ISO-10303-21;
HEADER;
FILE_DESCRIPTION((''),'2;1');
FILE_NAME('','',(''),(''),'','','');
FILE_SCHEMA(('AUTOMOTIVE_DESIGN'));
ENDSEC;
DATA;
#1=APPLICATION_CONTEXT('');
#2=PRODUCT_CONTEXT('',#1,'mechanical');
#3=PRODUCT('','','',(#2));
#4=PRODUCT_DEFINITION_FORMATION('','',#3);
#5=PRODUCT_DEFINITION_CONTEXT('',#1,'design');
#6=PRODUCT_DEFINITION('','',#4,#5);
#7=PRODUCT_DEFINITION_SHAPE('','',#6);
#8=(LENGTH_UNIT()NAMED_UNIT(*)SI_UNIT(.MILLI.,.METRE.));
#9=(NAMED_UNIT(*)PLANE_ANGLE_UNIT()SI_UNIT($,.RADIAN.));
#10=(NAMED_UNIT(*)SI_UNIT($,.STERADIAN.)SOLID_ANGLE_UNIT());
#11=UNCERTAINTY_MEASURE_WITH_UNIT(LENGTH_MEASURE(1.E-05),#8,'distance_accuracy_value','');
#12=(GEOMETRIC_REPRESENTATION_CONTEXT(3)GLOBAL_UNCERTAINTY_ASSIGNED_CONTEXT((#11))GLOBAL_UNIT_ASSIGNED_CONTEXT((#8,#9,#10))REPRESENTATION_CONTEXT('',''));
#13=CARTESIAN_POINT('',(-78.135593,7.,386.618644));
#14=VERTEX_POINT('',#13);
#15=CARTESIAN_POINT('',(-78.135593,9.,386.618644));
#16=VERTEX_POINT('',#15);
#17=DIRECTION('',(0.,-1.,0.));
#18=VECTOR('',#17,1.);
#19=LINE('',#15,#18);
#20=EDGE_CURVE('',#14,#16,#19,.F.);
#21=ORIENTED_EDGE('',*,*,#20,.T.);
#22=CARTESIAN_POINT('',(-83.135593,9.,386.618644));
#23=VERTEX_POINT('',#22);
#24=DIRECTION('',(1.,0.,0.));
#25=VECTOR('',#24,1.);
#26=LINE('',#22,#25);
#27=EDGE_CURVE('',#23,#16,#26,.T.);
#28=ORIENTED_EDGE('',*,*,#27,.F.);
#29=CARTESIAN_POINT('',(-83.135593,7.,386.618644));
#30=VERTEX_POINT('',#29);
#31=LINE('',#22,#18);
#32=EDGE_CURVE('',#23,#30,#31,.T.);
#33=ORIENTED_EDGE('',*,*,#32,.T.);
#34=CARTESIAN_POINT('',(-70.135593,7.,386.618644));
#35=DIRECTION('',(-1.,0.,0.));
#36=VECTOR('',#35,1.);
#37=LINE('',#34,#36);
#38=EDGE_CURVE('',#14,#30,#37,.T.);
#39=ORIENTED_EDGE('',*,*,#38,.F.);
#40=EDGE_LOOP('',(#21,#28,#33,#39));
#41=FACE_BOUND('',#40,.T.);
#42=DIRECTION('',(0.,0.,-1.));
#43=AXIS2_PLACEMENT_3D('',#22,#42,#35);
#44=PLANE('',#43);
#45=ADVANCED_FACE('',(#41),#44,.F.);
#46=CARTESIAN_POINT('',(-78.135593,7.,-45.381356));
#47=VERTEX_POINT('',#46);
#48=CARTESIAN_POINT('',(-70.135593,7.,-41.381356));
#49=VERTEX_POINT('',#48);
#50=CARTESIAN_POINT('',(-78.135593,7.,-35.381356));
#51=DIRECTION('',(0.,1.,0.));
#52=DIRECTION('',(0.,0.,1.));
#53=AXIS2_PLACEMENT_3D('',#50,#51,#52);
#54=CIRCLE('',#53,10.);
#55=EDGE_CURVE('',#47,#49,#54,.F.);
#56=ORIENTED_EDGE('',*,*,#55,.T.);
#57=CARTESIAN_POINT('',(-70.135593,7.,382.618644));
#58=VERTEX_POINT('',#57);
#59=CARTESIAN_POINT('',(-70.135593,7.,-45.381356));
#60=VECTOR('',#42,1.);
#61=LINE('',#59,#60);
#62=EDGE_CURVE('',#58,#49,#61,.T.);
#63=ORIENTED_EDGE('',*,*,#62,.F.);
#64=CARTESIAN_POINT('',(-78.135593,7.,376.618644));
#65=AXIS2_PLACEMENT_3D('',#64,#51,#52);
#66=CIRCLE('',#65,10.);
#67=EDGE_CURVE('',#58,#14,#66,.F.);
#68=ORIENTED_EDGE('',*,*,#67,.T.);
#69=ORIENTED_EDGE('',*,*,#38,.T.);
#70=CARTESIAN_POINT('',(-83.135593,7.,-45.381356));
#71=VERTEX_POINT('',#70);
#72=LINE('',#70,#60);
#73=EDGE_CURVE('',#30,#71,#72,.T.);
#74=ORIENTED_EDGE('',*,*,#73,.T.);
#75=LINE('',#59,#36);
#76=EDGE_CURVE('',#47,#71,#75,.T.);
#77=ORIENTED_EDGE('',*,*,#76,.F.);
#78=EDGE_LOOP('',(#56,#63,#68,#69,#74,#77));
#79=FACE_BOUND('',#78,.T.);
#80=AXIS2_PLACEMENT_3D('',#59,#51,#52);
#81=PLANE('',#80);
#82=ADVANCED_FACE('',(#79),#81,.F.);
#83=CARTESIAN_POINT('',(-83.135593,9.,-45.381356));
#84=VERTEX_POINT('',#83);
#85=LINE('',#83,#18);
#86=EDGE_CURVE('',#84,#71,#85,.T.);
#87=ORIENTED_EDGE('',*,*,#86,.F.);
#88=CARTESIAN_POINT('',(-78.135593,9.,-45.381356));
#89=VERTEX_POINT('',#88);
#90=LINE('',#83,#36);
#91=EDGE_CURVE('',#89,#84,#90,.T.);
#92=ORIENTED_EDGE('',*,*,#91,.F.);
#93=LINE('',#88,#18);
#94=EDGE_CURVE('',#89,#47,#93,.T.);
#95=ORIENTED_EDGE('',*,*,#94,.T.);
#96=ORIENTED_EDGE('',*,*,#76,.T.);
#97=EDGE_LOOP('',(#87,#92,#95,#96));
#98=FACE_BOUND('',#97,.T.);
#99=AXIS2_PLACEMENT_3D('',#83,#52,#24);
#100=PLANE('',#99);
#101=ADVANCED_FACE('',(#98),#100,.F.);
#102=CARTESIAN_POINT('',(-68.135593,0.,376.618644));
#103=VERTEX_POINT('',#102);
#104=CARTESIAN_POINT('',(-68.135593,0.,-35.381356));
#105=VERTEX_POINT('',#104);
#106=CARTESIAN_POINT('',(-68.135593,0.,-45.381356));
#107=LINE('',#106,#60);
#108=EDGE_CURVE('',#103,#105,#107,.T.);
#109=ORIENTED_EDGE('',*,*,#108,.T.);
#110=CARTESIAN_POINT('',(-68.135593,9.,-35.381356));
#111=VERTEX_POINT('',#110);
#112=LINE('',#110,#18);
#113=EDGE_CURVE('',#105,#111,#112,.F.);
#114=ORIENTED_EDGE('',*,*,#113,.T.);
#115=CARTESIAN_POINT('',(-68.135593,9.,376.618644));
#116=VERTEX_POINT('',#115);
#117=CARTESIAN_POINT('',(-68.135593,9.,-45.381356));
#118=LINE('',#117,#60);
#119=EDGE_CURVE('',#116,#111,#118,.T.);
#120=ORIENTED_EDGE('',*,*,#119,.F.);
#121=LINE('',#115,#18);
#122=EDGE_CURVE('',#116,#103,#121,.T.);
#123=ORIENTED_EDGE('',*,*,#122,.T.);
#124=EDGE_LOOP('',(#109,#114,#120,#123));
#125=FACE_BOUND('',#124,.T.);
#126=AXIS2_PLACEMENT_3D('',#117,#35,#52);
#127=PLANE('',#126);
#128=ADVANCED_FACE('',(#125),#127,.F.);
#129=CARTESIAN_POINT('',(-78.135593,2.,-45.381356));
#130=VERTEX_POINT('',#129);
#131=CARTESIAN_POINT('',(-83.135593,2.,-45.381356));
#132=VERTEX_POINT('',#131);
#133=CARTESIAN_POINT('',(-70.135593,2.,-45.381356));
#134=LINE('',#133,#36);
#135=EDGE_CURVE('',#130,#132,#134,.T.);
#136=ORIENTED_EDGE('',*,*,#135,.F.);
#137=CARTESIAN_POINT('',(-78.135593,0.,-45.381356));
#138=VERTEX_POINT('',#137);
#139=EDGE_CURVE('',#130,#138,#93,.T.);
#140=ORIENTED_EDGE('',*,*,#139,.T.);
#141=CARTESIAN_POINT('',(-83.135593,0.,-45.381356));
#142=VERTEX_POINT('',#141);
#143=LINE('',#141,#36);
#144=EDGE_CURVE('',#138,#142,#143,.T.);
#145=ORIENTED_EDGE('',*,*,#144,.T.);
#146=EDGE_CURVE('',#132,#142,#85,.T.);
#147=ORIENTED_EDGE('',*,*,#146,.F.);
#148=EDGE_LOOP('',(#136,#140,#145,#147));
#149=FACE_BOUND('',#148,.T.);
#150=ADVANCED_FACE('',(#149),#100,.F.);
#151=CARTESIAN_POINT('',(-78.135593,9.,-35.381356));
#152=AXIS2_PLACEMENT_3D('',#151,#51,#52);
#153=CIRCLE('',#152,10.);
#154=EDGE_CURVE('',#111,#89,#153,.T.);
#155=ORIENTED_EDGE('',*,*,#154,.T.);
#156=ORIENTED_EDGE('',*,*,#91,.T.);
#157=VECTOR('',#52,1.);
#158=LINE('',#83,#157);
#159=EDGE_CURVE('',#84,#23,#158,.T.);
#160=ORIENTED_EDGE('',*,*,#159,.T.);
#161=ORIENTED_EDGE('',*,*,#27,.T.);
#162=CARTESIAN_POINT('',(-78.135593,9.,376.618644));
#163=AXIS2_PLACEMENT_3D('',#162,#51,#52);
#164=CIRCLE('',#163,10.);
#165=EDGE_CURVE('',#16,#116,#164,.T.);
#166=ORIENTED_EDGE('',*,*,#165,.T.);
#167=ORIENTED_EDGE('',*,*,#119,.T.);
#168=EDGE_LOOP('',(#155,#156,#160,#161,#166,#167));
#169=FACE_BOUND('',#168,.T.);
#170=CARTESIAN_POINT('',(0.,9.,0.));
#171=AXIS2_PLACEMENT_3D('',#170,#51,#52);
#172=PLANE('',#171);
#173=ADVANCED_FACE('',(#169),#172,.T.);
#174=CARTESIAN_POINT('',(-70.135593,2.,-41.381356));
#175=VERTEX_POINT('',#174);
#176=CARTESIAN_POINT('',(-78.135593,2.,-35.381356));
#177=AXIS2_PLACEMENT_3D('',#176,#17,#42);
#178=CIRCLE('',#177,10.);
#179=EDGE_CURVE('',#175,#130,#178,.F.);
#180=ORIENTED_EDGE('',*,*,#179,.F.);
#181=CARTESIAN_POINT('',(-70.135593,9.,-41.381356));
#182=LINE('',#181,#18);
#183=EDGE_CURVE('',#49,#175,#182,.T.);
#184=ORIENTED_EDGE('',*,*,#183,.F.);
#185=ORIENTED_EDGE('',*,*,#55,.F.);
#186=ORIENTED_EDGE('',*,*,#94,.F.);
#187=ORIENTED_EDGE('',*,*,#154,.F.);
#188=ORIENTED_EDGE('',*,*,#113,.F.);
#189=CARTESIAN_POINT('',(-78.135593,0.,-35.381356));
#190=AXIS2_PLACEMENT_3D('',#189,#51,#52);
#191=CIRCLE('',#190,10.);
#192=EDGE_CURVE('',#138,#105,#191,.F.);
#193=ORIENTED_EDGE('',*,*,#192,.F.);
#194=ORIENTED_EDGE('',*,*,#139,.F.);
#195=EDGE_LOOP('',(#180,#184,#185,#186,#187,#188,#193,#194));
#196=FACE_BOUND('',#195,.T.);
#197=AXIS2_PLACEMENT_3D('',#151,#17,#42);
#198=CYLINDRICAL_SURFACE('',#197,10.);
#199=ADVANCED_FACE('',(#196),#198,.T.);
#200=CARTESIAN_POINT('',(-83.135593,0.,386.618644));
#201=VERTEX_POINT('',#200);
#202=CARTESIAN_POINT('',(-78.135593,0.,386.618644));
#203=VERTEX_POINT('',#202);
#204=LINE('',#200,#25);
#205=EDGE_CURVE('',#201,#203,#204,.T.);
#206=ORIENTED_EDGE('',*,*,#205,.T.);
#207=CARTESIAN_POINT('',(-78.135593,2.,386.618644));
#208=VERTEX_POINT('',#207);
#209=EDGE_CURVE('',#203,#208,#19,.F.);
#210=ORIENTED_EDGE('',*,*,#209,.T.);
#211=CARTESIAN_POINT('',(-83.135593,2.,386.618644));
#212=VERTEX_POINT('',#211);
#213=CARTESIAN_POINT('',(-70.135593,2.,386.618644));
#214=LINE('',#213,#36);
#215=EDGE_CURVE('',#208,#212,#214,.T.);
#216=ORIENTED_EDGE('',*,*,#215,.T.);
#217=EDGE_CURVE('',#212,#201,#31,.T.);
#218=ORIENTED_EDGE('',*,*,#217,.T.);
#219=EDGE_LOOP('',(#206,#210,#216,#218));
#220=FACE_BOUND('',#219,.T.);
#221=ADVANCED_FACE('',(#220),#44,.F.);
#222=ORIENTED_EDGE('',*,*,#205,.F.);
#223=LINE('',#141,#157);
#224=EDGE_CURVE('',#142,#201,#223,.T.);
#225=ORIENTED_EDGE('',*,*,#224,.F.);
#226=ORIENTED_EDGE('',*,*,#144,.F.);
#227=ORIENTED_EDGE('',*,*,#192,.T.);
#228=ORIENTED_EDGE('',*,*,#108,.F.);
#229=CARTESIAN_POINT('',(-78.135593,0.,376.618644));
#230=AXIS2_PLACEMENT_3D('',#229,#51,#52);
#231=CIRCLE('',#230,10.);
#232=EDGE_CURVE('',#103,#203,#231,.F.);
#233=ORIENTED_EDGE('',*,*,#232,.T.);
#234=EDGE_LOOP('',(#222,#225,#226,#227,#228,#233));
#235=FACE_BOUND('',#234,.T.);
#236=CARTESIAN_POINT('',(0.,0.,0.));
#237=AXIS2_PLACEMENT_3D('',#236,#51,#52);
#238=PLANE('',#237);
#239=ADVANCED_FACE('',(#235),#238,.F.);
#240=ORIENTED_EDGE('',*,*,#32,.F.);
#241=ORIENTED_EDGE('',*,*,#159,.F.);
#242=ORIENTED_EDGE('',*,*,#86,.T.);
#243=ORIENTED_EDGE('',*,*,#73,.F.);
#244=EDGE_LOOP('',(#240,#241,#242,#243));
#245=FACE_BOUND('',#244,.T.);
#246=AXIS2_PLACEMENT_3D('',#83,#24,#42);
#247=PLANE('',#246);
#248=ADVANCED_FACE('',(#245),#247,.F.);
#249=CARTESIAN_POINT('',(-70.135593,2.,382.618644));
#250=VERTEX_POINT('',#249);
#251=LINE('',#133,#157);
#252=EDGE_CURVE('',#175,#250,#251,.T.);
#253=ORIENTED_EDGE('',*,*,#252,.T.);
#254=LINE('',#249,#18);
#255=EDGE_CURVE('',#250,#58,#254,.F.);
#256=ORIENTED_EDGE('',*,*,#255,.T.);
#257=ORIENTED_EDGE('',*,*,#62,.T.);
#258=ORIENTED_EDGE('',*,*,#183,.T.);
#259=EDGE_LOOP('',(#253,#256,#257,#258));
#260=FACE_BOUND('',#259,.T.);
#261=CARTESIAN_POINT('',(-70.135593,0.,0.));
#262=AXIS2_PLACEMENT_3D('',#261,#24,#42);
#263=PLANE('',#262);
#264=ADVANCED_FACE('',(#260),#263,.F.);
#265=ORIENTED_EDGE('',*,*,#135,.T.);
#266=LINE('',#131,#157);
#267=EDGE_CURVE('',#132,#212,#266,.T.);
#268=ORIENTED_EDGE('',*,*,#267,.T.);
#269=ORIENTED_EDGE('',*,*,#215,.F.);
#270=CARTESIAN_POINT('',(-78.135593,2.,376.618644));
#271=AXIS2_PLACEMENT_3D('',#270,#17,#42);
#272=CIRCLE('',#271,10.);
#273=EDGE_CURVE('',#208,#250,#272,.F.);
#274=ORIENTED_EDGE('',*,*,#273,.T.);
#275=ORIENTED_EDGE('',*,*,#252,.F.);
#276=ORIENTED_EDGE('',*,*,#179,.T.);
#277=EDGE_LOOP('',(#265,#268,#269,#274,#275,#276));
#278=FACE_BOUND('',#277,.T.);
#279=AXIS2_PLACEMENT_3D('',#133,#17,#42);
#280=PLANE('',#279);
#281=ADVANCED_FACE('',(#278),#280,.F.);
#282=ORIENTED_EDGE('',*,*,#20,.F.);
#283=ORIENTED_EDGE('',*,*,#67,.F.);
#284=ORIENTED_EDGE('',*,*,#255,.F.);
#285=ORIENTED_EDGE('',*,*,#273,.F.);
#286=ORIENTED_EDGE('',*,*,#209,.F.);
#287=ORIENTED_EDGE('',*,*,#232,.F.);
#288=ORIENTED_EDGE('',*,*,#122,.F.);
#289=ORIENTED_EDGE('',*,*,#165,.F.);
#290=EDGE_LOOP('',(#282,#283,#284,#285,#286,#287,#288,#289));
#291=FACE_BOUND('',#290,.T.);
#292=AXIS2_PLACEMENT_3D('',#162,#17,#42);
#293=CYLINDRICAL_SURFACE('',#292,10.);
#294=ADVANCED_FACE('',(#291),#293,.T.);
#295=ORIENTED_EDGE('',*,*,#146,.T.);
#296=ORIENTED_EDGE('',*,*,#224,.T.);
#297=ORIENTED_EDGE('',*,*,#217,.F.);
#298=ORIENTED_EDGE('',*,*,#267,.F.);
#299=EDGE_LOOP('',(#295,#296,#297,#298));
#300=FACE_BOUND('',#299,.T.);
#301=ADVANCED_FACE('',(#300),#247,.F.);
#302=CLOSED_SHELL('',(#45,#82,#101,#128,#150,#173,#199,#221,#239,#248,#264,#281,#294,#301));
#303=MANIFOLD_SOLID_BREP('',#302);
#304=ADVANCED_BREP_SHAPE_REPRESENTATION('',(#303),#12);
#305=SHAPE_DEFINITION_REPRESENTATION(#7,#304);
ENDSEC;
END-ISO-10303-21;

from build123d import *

# Parameters (mm, degrees)
SKETCH2_W           = 15
SKETCH2_H           = 432
BOSS_EXTRUDE1_DEPTH = 9
SKETCH3_W           = 432
SKETCH3_H           = 5
CUT_EXTRUDE1_DEPTH  = 13
FILLET1_R           = 10
FILLET2_R           = 10


with BuildPart() as part:
    # Sketch2 → Boss-Extrude1 (new body)
    with BuildSketch(Plane(origin=(0, 0, 0), x_dir=(1, 0, 0), z_dir=(0, 1, 0))):
        with Locations((-75.63559322, -170.618644068)):
            Rectangle(SKETCH2_W, SKETCH2_H)
    extrude(amount=BOSS_EXTRUDE1_DEPTH)

    # Sketch3 → Cut-Extrude1 (cut)
    with BuildSketch(Plane.ZY.offset(83.13559322)):
        with Locations((170.618644068, 4.5)):
            Rectangle(SKETCH3_W, SKETCH3_H)
    extrude(amount=-CUT_EXTRUDE1_DEPTH, mode=Mode.SUBTRACT)

    # Fillet1
    # the kernel refuses this fillet: 10 mm, written as the material it takes off along each edge
    with BuildSketch(Plane(origin=(-68.13559322, -25, 386.618644068), x_dir=(0, 0, -1), z_dir=(0, 1, 0))) as fillet1_piece_1:
        with BuildLine():
            CenterArc((FILLET1_R, FILLET1_R), FILLET1_R, 180, 90)
            Line((0, FILLET1_R), (0, 0))
            Line((0, 0), (FILLET1_R, 0))
        make_face()
    extrude(amount=59, mode=Mode.SUBTRACT)

    # Fillet2
    # the kernel refuses this fillet: 10 mm, written as the material it takes off along each edge
    with BuildSketch(Plane(origin=(-68.13559322, -25, -45.381355932), x_dir=(-1, 0, 0), z_dir=(0, 1, 0))) as fillet2_piece_1:
        with BuildLine():
            CenterArc((FILLET2_R, FILLET2_R), FILLET2_R, 180, 90)
            Line((0, FILLET2_R), (0, 0))
            Line((0, 0), (FILLET2_R, 0))
        make_face()
    extrude(amount=59, mode=Mode.SUBTRACT)


solid = part.part
